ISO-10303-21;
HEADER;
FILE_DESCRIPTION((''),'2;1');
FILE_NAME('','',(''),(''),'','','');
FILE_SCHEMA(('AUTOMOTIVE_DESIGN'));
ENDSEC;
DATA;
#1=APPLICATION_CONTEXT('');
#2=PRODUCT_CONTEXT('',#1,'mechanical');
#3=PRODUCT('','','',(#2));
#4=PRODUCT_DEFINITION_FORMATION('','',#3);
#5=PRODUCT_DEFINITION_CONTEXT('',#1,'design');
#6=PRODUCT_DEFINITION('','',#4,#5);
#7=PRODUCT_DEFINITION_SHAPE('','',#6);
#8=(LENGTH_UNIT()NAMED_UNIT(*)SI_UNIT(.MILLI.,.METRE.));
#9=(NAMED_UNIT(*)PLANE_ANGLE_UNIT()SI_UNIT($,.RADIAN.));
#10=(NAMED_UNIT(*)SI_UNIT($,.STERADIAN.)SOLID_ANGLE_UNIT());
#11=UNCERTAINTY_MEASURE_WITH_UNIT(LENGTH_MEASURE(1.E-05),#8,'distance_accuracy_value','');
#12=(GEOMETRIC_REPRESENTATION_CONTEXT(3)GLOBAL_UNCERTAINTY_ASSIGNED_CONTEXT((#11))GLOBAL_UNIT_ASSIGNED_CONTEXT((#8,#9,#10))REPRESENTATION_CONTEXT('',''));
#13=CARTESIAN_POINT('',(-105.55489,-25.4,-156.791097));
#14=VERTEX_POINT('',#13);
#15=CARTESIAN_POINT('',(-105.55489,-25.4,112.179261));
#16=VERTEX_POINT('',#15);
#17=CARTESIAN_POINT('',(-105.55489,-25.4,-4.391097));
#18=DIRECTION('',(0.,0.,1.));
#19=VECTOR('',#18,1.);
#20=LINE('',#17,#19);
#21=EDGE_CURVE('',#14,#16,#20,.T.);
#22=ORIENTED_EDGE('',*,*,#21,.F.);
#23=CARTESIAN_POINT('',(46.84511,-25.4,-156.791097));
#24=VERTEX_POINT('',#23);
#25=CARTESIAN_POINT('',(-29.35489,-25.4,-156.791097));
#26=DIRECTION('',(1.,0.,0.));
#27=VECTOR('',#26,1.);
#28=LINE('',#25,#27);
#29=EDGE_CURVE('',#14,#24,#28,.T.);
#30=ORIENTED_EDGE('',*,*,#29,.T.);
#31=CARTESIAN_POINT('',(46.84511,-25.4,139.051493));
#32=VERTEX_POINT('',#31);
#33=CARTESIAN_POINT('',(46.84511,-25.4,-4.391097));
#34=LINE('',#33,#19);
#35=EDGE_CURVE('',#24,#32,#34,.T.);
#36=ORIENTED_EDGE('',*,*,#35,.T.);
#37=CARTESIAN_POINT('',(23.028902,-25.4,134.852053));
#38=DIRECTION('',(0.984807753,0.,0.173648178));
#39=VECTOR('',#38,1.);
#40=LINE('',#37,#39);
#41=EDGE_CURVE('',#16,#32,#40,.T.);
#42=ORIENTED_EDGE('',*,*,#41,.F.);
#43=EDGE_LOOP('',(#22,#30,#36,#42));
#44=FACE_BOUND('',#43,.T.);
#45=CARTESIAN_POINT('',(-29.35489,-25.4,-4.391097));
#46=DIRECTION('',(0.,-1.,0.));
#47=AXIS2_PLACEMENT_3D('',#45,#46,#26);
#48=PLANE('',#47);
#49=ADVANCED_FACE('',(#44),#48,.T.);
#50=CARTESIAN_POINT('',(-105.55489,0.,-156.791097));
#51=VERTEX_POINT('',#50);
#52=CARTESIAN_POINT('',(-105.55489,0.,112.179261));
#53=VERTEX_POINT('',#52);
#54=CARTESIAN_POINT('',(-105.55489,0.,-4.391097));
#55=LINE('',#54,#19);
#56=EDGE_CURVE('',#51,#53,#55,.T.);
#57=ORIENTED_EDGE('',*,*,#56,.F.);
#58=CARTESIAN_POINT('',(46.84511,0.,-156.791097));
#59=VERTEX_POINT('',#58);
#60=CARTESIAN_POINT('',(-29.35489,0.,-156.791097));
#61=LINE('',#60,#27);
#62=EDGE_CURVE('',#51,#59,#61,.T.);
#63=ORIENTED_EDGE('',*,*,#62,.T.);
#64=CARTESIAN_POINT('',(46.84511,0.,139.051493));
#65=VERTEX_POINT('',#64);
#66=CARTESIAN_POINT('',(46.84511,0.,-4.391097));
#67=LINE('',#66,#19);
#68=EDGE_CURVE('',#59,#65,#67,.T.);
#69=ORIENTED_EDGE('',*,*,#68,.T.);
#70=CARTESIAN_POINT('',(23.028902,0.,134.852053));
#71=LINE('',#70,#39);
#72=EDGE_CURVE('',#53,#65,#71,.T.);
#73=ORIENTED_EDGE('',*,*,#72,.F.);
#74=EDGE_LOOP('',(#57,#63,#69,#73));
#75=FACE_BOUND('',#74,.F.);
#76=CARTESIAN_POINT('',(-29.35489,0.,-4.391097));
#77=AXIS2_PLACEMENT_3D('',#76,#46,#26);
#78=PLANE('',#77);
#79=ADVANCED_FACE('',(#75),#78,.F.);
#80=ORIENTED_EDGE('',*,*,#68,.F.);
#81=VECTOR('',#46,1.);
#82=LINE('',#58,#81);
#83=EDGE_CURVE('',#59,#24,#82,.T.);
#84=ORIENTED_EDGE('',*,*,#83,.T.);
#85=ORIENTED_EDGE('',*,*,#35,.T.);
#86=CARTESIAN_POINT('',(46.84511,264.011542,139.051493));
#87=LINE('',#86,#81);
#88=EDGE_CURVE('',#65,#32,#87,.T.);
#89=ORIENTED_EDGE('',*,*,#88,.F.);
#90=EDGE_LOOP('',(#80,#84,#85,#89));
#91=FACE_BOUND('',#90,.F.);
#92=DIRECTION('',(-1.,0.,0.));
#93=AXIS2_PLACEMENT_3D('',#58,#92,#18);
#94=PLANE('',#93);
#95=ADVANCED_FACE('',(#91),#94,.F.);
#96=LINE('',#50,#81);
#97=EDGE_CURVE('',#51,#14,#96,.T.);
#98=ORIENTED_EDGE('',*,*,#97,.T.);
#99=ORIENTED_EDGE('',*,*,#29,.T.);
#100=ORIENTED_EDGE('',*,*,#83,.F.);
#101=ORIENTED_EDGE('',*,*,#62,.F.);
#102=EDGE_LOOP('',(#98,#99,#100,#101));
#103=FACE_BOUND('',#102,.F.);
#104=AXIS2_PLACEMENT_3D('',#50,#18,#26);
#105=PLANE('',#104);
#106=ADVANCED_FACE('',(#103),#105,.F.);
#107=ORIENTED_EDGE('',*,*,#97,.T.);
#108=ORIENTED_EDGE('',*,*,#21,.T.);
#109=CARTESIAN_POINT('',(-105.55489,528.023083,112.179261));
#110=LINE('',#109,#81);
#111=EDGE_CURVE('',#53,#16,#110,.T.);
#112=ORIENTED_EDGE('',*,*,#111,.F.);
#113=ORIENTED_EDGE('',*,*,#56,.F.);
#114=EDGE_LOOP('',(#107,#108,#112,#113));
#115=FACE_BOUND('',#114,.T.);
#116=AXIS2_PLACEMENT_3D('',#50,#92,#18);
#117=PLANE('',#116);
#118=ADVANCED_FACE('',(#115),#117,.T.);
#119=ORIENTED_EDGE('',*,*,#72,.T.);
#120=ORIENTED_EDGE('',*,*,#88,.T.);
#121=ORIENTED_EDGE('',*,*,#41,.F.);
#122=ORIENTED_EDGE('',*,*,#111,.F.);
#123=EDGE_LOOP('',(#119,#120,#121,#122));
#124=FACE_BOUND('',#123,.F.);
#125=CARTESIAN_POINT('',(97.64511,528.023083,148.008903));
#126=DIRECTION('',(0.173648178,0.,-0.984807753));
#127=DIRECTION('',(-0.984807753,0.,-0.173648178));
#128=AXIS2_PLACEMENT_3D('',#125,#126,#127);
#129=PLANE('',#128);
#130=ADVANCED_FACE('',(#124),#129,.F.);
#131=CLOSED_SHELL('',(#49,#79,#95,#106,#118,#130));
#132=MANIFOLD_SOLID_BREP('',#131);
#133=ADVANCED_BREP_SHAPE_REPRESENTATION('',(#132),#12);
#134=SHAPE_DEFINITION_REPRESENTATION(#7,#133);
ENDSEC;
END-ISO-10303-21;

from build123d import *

# Parameters (mm, degrees)
F0_W        = 152.4
F0_H        = 304.8
F1_DEPTH    = 25.4
F2_T1_DEPTH = 1081.4461668656


# Not quite as in the source:
# - a fillet or chamfer that OpenCascade refuses, or shapes differently, is made with other operations: its cross-section is extruded or revolved along the edge and cut away or added


with BuildPart() as f1:
    # F0 (on Front) → F1 (new body)
    with BuildSketch(Plane.XZ):
        with Locations((-29.3548897063, -4.3910965323)):
            Rectangle(F0_W, F0_H)
    extrude(amount=F1_DEPTH)

    # F2: chamfer of 203.2 x 35.82964248 on 1 edges, made by hand

    # F2_s2 → F2_t1 (cut)
    with BuildSketch(Plane.XZ.offset(-528.0230834328)):
        Polygon((97.6451102937, 148.0089034677), (-105.5548897063, 112.1792609877), (-105.5548897063, 148.0089034677), align=None)
    extrude(amount=F2_T1_DEPTH, mode=Mode.SUBTRACT)


solid = f1.part
